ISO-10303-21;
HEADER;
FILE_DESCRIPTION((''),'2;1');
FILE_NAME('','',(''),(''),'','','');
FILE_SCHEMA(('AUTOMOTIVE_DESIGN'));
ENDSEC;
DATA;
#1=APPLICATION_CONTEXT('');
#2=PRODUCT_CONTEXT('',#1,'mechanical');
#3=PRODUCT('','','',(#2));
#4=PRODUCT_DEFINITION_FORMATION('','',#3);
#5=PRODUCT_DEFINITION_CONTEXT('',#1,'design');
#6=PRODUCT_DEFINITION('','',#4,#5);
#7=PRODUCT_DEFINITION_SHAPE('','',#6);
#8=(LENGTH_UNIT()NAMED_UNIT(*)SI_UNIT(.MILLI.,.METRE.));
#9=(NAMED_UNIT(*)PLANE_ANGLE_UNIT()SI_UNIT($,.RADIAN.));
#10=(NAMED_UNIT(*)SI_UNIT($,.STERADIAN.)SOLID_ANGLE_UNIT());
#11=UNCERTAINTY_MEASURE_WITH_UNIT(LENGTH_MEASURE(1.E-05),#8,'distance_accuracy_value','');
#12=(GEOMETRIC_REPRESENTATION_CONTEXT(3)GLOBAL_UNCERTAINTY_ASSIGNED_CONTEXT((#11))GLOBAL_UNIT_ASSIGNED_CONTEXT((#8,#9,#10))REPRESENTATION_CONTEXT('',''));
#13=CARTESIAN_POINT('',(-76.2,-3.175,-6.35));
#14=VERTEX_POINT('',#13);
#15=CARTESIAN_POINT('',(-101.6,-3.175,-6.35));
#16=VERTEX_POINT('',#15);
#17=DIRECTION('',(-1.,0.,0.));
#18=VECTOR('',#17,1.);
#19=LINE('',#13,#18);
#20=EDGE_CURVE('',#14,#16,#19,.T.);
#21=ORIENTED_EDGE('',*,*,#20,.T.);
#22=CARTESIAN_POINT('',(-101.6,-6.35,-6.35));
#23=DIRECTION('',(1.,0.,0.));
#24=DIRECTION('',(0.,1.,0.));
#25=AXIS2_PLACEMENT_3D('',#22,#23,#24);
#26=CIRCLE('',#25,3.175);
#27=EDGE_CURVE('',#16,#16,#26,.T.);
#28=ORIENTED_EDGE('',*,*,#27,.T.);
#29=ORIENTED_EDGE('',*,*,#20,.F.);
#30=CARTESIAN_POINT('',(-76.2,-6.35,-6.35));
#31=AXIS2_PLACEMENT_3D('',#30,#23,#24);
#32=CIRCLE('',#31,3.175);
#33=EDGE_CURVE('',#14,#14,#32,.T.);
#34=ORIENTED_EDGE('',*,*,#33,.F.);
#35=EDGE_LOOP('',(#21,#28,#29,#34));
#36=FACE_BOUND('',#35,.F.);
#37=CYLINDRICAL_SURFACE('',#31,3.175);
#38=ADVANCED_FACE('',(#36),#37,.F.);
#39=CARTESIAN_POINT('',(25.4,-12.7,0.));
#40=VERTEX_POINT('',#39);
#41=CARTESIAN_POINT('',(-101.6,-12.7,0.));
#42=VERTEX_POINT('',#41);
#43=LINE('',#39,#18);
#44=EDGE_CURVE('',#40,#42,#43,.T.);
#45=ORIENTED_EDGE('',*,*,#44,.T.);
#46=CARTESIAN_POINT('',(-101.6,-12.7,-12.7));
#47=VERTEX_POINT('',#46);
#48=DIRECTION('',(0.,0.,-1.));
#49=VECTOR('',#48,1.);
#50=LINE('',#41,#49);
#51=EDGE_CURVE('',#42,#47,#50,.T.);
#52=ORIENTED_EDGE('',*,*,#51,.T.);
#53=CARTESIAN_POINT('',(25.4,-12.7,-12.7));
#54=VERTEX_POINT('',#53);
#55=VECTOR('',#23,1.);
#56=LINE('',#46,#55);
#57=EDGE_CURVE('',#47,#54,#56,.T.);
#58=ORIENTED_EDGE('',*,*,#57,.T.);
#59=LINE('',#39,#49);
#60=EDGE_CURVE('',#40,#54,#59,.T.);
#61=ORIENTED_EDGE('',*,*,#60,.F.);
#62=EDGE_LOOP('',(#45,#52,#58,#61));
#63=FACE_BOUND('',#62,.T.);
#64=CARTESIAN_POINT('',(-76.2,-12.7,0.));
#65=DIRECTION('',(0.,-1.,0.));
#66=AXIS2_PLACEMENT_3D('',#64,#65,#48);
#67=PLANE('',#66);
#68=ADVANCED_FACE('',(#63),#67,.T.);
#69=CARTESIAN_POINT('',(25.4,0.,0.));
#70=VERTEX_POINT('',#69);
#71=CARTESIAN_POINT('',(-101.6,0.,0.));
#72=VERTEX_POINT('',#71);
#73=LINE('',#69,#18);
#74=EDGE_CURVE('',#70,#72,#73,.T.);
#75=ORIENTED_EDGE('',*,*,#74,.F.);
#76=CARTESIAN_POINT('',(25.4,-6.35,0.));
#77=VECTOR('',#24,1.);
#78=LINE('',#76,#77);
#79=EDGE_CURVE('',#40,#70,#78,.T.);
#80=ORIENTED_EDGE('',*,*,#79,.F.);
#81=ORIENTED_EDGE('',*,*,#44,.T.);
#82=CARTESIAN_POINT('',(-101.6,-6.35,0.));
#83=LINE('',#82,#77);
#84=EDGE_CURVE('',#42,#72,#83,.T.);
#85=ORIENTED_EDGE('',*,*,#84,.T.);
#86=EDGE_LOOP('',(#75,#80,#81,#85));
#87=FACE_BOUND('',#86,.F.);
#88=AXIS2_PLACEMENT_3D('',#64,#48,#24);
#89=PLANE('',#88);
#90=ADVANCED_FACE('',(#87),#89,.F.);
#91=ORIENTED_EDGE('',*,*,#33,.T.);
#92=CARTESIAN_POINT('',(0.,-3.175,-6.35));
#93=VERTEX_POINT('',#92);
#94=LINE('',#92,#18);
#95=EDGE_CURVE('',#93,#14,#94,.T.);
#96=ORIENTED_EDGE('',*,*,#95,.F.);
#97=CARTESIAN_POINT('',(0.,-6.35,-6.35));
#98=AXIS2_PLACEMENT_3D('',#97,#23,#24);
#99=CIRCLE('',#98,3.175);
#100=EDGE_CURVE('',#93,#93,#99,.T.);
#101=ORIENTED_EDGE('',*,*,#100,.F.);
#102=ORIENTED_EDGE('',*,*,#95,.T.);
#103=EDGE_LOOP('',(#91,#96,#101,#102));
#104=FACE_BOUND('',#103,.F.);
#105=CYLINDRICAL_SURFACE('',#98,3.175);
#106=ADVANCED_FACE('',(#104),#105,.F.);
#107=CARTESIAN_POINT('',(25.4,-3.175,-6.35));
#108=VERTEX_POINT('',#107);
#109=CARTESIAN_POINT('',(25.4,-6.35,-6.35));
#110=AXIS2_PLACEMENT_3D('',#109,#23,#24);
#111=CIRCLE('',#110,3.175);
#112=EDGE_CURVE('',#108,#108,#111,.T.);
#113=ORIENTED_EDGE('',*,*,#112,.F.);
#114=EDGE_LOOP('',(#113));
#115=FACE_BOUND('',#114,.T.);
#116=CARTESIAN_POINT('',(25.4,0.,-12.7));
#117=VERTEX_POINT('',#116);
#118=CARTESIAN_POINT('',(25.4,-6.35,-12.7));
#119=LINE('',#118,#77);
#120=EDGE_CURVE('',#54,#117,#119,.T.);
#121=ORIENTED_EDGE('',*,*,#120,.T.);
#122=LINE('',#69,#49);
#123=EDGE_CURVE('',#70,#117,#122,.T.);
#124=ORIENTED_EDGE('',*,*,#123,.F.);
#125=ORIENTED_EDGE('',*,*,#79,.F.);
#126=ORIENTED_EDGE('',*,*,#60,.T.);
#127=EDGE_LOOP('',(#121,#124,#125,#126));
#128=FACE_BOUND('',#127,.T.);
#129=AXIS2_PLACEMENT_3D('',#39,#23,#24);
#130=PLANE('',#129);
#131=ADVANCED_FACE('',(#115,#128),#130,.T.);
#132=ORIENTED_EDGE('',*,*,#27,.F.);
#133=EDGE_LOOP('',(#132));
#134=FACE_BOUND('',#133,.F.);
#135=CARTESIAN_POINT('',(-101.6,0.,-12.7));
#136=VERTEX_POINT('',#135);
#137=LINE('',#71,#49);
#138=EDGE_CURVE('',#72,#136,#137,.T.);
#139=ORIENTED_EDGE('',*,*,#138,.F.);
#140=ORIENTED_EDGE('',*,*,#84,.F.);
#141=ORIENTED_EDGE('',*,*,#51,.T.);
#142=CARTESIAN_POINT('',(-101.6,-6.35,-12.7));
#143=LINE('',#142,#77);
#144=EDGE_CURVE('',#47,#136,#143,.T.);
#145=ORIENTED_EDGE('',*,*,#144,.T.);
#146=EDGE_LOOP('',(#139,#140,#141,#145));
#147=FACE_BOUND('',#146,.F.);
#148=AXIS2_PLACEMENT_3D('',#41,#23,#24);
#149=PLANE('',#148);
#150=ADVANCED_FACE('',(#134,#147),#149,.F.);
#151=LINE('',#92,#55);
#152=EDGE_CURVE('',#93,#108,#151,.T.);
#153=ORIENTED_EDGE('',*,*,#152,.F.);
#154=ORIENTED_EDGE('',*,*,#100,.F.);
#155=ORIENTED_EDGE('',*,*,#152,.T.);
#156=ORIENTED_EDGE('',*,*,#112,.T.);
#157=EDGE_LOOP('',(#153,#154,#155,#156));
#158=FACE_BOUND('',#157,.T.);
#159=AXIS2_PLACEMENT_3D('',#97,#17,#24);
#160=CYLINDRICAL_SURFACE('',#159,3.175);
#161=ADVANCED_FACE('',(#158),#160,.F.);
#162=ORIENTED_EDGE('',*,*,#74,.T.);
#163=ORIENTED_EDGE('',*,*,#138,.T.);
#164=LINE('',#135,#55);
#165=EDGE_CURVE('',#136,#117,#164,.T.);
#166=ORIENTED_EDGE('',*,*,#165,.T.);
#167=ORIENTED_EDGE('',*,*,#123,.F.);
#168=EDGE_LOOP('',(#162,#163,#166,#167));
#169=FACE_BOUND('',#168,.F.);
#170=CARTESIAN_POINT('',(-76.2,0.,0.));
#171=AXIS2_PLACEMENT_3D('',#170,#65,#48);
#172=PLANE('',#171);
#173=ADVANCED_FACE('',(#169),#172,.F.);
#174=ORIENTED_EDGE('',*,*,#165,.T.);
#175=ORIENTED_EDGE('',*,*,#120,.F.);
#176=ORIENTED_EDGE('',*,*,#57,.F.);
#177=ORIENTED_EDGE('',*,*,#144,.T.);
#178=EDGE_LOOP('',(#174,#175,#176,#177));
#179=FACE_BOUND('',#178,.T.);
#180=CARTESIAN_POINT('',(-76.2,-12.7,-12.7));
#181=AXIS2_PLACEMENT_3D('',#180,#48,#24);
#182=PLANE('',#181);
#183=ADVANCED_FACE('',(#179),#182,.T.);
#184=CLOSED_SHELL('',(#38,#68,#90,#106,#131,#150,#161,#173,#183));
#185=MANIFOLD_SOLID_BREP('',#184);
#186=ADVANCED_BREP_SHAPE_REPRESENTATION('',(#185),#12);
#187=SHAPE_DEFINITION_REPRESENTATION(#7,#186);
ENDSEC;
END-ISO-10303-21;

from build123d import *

# Parameters (mm, degrees)
F0_W     = 76.2
F0_H     = 12.7
F1_DEPTH = 12.7
F2_R     = 3.175
F3_DEPTH = 85.27917
F4_DEPTH = 25.4
F5_DEPTH = 25.4


with BuildPart() as f1:
    # F0 (on Top) → F1 (new body)
    with BuildSketch(Plane.XY):
        with Locations((-38.1, -6.35)):
            Rectangle(F0_W, F0_H)
    extrude(amount=-F1_DEPTH)

    # F2 (on face) → F3 (cut)
    with BuildSketch(Plane.YZ):
        with Locations((-6.35, -6.35)):
            Circle(F2_R)
    extrude(amount=-F3_DEPTH, mode=Mode.SUBTRACT)

    # F4 (add): a face of the model
    f4_faces = [f1.faces().sort_by_distance(p)[0] for p in [
        (0, -12.5203948776, -6.35),
    ]]
    extrude(f4_faces, amount=F4_DEPTH)

    # F5 (add): a face of the model
    f5_faces = [f1.faces().sort_by_distance(p)[0] for p in [
        (-76.2, -0.1796051224, -6.35),
    ]]
    extrude(f5_faces, amount=F5_DEPTH)


solid = f1.part
